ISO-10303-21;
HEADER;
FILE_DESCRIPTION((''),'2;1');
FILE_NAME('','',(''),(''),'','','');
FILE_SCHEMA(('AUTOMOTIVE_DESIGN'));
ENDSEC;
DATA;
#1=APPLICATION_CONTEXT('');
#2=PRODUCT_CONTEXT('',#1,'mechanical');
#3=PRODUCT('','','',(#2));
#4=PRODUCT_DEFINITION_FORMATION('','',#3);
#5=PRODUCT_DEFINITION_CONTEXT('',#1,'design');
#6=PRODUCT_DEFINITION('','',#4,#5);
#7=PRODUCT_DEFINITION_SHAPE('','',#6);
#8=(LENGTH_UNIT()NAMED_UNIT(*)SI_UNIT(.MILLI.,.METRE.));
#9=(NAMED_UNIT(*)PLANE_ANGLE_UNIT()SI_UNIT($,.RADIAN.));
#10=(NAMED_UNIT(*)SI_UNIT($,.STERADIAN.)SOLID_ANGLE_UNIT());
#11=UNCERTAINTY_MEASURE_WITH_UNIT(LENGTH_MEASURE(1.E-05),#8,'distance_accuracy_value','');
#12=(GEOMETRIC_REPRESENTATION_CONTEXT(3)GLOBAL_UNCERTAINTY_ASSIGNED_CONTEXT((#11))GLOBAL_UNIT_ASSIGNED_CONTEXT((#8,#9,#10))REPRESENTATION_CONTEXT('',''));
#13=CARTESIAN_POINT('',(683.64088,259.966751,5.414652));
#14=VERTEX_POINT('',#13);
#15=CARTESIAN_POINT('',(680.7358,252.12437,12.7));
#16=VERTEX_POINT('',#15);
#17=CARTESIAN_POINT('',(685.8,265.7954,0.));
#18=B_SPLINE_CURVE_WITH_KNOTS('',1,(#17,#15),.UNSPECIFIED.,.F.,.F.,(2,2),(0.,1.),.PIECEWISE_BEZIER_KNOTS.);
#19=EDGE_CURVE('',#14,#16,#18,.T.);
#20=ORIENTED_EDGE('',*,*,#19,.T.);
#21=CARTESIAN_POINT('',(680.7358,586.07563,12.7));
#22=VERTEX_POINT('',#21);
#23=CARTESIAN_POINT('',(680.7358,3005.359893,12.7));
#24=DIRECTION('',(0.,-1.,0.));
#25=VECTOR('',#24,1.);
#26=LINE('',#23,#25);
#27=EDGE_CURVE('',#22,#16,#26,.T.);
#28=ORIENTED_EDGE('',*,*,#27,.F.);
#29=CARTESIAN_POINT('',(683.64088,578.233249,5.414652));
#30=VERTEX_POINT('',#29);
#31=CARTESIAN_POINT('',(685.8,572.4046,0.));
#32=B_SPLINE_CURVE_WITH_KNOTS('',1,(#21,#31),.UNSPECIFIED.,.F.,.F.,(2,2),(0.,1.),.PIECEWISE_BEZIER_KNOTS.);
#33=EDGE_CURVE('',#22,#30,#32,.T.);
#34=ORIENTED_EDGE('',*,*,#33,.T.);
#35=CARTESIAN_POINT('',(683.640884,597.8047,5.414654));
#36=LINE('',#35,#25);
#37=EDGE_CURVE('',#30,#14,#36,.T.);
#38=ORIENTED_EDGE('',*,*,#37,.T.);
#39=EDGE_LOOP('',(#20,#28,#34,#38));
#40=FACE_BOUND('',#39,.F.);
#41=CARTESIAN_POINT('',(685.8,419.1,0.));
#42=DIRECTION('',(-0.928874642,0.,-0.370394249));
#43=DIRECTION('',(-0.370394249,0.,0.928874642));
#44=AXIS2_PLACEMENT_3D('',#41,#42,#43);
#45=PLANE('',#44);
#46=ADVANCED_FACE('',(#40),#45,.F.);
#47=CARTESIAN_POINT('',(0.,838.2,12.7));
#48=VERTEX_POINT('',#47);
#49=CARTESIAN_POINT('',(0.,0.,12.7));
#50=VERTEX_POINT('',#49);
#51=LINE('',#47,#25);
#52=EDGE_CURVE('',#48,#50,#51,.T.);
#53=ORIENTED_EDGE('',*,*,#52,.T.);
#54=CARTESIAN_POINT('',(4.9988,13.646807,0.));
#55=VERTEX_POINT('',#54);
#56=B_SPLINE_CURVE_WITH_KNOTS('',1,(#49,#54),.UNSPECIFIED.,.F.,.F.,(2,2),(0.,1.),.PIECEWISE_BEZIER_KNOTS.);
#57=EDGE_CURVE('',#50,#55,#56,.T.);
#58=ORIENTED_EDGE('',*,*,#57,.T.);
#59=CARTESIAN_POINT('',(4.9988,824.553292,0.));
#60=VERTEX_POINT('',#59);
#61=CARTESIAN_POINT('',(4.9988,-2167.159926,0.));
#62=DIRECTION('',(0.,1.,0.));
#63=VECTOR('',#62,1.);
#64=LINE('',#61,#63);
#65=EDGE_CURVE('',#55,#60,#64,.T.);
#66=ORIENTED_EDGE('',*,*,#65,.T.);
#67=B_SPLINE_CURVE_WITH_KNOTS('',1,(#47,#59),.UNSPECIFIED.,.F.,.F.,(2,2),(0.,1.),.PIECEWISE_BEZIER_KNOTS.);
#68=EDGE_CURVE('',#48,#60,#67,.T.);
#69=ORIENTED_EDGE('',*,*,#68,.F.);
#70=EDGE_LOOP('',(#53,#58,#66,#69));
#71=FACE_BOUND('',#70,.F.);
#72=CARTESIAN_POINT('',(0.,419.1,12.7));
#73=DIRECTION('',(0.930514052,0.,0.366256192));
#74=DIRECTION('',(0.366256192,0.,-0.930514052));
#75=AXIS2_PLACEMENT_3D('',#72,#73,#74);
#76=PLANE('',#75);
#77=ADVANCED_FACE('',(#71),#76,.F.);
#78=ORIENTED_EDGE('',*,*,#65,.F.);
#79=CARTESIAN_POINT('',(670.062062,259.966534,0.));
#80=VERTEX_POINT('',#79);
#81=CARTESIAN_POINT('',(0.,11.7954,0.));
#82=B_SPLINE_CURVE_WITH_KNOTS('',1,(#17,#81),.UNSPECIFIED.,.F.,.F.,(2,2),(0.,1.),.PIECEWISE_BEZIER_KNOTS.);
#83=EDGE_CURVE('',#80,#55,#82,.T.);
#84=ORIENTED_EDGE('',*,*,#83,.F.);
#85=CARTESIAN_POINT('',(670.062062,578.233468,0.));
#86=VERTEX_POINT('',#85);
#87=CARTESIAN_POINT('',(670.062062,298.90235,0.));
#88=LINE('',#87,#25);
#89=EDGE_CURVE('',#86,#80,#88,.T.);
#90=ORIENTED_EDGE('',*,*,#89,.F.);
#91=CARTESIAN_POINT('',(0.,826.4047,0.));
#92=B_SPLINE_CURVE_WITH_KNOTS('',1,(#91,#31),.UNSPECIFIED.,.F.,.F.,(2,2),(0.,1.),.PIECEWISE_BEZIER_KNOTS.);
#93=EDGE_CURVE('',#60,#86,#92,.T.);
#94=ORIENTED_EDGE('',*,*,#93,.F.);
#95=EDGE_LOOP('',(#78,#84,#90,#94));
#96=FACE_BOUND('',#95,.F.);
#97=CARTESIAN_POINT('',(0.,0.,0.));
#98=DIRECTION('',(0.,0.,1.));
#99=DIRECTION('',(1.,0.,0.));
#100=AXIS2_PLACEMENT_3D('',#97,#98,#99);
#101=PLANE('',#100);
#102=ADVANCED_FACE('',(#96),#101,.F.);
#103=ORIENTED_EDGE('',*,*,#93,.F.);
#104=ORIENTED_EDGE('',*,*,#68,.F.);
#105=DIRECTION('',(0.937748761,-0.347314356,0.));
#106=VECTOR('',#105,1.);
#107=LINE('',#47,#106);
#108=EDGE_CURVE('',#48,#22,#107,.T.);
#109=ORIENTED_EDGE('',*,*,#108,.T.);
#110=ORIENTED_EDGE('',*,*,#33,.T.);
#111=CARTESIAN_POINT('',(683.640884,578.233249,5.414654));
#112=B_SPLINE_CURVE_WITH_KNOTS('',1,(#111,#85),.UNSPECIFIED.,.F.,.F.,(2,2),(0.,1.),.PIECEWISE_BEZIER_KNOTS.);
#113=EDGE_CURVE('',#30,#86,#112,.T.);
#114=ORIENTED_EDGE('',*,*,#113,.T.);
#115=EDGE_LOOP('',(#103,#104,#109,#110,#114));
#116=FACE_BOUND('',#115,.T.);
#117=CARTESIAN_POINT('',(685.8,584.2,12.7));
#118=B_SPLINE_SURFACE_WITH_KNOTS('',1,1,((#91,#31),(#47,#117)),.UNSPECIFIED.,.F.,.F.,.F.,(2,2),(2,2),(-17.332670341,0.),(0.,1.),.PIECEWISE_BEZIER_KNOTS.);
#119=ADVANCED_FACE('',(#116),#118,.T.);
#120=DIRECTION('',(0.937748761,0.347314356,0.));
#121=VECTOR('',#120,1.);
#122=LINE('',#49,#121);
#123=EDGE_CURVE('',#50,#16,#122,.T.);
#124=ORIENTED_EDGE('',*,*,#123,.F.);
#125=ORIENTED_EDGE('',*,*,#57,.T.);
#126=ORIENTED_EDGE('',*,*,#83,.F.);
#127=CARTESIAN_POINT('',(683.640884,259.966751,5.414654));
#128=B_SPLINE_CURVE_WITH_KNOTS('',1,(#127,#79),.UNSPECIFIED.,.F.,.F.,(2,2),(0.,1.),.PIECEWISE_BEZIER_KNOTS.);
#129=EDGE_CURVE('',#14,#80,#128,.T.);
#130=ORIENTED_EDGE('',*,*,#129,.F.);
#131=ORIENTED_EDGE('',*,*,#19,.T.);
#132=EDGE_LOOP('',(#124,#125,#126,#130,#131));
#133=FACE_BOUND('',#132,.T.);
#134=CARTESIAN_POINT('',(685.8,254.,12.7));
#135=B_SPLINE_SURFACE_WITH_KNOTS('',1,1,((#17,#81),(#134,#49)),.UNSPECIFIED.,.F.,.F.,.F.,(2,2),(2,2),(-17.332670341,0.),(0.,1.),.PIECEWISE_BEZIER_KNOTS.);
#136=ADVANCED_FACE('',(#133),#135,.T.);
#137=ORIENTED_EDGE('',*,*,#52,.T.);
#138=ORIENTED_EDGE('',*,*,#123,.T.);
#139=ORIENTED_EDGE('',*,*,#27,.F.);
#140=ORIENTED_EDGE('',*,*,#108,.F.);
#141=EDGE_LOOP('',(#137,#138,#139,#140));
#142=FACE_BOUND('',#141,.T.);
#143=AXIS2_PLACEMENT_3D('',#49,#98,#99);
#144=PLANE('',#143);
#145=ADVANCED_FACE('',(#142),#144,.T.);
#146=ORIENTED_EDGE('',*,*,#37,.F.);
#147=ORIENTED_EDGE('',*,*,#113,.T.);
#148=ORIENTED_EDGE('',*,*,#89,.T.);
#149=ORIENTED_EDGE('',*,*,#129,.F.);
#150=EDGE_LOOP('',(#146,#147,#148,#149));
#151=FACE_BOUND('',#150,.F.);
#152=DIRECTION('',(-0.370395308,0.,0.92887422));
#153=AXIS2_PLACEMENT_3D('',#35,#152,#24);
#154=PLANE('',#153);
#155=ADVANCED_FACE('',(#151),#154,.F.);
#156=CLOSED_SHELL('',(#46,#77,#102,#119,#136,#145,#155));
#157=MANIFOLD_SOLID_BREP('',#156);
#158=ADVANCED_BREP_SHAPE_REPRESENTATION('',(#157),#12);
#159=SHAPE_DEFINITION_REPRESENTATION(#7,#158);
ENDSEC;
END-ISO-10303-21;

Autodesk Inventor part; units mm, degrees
ref_plane "YZ Plane" through (0, 0, 0) normal (1, 0, 0) x (0, 1, 0)
sketch "Sketch1" plane through (0, 0, 0) normal (0, 0, 1) x (1, 0, 0)
  line L0 (0, 0) -> (685.8, 0)
  line L1 (685.8, 0) -> (685.8, 838.2)
  line L2 (685.8, 838.2) -> (0, 838.2)
  line L3 (0, 838.2) -> (0, 0)
  line L4 (685.8, 254) -> (787.4, 254) construction
  line L5 (787.4, 254) -> (787.4, 584.2) construction
  line L6 (787.4, 584.2) -> (685.8, 584.2) construction
  line L7 (0, 838.2) -> (685.8, 584.2)
  line L8 (0, 0) -> (685.8, 254)
  dimension "d0" = 685.8
  dimension "d1" = 838.2
  dimension "d2" = 101.6
  dimension "d3" = 330.2
  dimension "d4" = 254
extrude "Extrusion1" add sketch "Sketch1" along normal blind 12.7 contours L3 L7 L1 L8
sketch "Sketch2" plane through (0, 0, 0) normal (-1, 0, 0) x (0, 0, 1)
  line L0 (12.7, 838.2) -> (12.7, 0) projected
  line L1 (12.7, 0) -> (0, 11.7954)
  line L2 (0, 838.2) -> (0, 0) projected
  line L3 (12.7, 0) -> (30.0327, 0) construction
  line L4 (12.7, 838.2) -> (0, 825.5)
  line L5 (12.7, 838.2) -> (30.6605, 838.2) construction
  line L6 (0, 838.2) -> (12.7, 838.2) projected
  line L7 (12.7, 838.2) -> (0, 838.2)
  line L8 (0, 838.2) -> (0, 825.5)
  line L9 (0, 0) -> (12.7, 0) projected
  line L10 (12.7, 0) -> (0, 0)
  line L11 (0, 0) -> (0, 11.7954)
  dimension "d7" = 137.115
  dimension "d8" = 135
sketch "Sketch3" plane through (685.8, 254, 0) normal (1, 0, 0) x (0, 0, -1)
  line L0 (-12.7, -254) -> (-12.7, 0) projected
  line L1 (-12.7, 0) -> (0, 11.7954)
  line L2 (0, 0) -> (0, 330.2) projected
  line L3 (-12.7, 0) -> (4.6327, 0) construction
  line L4 (0, 11.7954) -> (0, 0)
  line L5 (0, 0) -> (-12.7, 0)
  line L6 (-12.7, 0) -> (-12.7, 330.2) projected
  line L7 (-12.7, 330.2) -> (0, 316.526)
  line L8 (0, 316.526) -> (0, 330.2)
  line L9 (0, 330.2) -> (-12.7, 330.2)
  point P0 (0, -254)
  dimension "d9" = 42.885
loft "Loft1" cut profiles "Sketch3", "Sketch2" contours L1 L2 L5 / L9 L2 L1
sketch "Sketch4" plane through (685.8, 584.2, 12.7) normal (1, 0, 0) x (0, 0, -1)
  line L0 (0, 0) -> (0, 254) projected
  line L1 (0, 0) -> (12.7, -11.7954)
  line L2 (12.7, -318.4046) -> (12.7, 0) projected
  line L3 (0, 0) -> (17.3327, 0) construction
  line L4 (12.7, -11.7954) -> (12.7, 0)
  line L5 (12.7, 0) -> (0, 0)
  point P0 (12.7, -584.2)
  dimension "d14" = 42.885
sketch "Sketch5" plane through (0, 11.7954, 0) normal (-1, 0, 0) x (0, 0, 1)
  line L0 (0, 826.4046) -> (12.7, 826.4046) projected
  line L1 (12.7, 826.4046) -> (0, 814.6093)
  line L2 (0, 572.4046) -> (0, 826.4046) projected
  line L3 (12.7, 826.4046) -> (30.0327, 826.4046) construction
  line L4 (0, 814.6093) -> (0, 826.4046)
  line L5 (0, 826.4046) -> (12.7, 826.4046)
  point P0 (0, -11.7954)
  dimension "d15" = 137.115
loft "Loft2" cut profiles "Sketch5", "Sketch4"
ref_plane "Work Plane1" through (685.8, 0, 0) normal (0.923076, 0, -0.3846176) x (0, 1, 0)
ref_plane "Work Plane2" through (0, 419.1, 0) normal (0, 1, 0) x (-1, 0, 0)
sketch "Sketch7" plane through (0, 419.1, 0) normal (0, 1, 0) x (-1, 0, 0)
  line L0 (-685.8, 0) -> (0, 0) projected
  line L1 (-685.8, 0) -> (-680.7358, 12.7)
  line L2 (0, 12.7) -> (-685.8, 12.7) projected
  line L3 (-685.8, 0) -> (-672.1275, 0) construction
  line L4 (-680.7358, 12.7) -> (-685.8, 12.7)
  line L5 (-685.8, 12.7) -> (-685.8, 0)
  dimension "d26" = 68.26
extrude "Extrusion3" cut sketch "Sketch7" against normal through all both and the other way through all
sketch "Sketch8" plane through (0, 419.1, 0) normal (0, 1, 0) x (-1, 0, 0)
  line L0 (-685.8, 0) -> (0, 0) projected
  line L1 (0, 0) -> (14.0129, 0) construction
  line L2 (0, 12.7) -> (-680.7358, 12.7) projected
  line L3 (0, 12.7) -> (-4.9988, 0)
  line L4 (0, 12.7) -> (13.6484, 12.7) construction
  line L5 (-4.9988, 0) -> (0, 0)
  line L6 (0, 12.7) -> (0, 0)
  dimension "d32" = 111.485
extrude "Extrusion4" cut sketch "Sketch8" against normal through all both and the other way through all
sketch "Sketch10" plane through (680.7358, 252.1244, 12.7) normal (0.9288742, 0, 0.3703953) x (0.3703953, 0, -0.9288742)
  line L0 (13.6725, 13.671) -> (13.6725, 320.2803) projected
  line L1 (13.6725, 345.6803) -> (7.8432, 345.6803)
  line L2 (7.8432, 345.6803) -> (7.8432, -11.729)
  line L3 (7.8432, -11.729) -> (13.6725, -11.729)
  line L4 (13.6725, -11.729) -> (13.6725, 345.6803)
  point P0 (-240.3446, -252.1244)
  point P1 (13.6725, 13.671)
  point P2 (13.6725, 320.2803)
  dimension "d37" = 5.8293
  dimension "d38" = 25.4
  dimension "d39" = 25.4
extrude "Extrusion6" cut sketch "Sketch10" against normal through all
sketch "Sketch12" plane through (0, 0, 12.7) normal (0, 0, 1) x (1, 0, 0)
  line L0 (-105.2786, 838.8792) -> (769.6918, 838.8792) construction
  line L1 (769.6918, 838.8792) -> (769.6918, -36.0911) construction
  line L2 (769.6918, -36.0911) -> (-105.2786, -36.0911) construction
  line L3 (-105.2786, -36.0911) -> (-105.2786, 838.8792) construction
  point P0 (0, 0)
properties part number "Wind Tunnel Inlet Body Single Panel Graphic Only" material "Wood (Oak)"
